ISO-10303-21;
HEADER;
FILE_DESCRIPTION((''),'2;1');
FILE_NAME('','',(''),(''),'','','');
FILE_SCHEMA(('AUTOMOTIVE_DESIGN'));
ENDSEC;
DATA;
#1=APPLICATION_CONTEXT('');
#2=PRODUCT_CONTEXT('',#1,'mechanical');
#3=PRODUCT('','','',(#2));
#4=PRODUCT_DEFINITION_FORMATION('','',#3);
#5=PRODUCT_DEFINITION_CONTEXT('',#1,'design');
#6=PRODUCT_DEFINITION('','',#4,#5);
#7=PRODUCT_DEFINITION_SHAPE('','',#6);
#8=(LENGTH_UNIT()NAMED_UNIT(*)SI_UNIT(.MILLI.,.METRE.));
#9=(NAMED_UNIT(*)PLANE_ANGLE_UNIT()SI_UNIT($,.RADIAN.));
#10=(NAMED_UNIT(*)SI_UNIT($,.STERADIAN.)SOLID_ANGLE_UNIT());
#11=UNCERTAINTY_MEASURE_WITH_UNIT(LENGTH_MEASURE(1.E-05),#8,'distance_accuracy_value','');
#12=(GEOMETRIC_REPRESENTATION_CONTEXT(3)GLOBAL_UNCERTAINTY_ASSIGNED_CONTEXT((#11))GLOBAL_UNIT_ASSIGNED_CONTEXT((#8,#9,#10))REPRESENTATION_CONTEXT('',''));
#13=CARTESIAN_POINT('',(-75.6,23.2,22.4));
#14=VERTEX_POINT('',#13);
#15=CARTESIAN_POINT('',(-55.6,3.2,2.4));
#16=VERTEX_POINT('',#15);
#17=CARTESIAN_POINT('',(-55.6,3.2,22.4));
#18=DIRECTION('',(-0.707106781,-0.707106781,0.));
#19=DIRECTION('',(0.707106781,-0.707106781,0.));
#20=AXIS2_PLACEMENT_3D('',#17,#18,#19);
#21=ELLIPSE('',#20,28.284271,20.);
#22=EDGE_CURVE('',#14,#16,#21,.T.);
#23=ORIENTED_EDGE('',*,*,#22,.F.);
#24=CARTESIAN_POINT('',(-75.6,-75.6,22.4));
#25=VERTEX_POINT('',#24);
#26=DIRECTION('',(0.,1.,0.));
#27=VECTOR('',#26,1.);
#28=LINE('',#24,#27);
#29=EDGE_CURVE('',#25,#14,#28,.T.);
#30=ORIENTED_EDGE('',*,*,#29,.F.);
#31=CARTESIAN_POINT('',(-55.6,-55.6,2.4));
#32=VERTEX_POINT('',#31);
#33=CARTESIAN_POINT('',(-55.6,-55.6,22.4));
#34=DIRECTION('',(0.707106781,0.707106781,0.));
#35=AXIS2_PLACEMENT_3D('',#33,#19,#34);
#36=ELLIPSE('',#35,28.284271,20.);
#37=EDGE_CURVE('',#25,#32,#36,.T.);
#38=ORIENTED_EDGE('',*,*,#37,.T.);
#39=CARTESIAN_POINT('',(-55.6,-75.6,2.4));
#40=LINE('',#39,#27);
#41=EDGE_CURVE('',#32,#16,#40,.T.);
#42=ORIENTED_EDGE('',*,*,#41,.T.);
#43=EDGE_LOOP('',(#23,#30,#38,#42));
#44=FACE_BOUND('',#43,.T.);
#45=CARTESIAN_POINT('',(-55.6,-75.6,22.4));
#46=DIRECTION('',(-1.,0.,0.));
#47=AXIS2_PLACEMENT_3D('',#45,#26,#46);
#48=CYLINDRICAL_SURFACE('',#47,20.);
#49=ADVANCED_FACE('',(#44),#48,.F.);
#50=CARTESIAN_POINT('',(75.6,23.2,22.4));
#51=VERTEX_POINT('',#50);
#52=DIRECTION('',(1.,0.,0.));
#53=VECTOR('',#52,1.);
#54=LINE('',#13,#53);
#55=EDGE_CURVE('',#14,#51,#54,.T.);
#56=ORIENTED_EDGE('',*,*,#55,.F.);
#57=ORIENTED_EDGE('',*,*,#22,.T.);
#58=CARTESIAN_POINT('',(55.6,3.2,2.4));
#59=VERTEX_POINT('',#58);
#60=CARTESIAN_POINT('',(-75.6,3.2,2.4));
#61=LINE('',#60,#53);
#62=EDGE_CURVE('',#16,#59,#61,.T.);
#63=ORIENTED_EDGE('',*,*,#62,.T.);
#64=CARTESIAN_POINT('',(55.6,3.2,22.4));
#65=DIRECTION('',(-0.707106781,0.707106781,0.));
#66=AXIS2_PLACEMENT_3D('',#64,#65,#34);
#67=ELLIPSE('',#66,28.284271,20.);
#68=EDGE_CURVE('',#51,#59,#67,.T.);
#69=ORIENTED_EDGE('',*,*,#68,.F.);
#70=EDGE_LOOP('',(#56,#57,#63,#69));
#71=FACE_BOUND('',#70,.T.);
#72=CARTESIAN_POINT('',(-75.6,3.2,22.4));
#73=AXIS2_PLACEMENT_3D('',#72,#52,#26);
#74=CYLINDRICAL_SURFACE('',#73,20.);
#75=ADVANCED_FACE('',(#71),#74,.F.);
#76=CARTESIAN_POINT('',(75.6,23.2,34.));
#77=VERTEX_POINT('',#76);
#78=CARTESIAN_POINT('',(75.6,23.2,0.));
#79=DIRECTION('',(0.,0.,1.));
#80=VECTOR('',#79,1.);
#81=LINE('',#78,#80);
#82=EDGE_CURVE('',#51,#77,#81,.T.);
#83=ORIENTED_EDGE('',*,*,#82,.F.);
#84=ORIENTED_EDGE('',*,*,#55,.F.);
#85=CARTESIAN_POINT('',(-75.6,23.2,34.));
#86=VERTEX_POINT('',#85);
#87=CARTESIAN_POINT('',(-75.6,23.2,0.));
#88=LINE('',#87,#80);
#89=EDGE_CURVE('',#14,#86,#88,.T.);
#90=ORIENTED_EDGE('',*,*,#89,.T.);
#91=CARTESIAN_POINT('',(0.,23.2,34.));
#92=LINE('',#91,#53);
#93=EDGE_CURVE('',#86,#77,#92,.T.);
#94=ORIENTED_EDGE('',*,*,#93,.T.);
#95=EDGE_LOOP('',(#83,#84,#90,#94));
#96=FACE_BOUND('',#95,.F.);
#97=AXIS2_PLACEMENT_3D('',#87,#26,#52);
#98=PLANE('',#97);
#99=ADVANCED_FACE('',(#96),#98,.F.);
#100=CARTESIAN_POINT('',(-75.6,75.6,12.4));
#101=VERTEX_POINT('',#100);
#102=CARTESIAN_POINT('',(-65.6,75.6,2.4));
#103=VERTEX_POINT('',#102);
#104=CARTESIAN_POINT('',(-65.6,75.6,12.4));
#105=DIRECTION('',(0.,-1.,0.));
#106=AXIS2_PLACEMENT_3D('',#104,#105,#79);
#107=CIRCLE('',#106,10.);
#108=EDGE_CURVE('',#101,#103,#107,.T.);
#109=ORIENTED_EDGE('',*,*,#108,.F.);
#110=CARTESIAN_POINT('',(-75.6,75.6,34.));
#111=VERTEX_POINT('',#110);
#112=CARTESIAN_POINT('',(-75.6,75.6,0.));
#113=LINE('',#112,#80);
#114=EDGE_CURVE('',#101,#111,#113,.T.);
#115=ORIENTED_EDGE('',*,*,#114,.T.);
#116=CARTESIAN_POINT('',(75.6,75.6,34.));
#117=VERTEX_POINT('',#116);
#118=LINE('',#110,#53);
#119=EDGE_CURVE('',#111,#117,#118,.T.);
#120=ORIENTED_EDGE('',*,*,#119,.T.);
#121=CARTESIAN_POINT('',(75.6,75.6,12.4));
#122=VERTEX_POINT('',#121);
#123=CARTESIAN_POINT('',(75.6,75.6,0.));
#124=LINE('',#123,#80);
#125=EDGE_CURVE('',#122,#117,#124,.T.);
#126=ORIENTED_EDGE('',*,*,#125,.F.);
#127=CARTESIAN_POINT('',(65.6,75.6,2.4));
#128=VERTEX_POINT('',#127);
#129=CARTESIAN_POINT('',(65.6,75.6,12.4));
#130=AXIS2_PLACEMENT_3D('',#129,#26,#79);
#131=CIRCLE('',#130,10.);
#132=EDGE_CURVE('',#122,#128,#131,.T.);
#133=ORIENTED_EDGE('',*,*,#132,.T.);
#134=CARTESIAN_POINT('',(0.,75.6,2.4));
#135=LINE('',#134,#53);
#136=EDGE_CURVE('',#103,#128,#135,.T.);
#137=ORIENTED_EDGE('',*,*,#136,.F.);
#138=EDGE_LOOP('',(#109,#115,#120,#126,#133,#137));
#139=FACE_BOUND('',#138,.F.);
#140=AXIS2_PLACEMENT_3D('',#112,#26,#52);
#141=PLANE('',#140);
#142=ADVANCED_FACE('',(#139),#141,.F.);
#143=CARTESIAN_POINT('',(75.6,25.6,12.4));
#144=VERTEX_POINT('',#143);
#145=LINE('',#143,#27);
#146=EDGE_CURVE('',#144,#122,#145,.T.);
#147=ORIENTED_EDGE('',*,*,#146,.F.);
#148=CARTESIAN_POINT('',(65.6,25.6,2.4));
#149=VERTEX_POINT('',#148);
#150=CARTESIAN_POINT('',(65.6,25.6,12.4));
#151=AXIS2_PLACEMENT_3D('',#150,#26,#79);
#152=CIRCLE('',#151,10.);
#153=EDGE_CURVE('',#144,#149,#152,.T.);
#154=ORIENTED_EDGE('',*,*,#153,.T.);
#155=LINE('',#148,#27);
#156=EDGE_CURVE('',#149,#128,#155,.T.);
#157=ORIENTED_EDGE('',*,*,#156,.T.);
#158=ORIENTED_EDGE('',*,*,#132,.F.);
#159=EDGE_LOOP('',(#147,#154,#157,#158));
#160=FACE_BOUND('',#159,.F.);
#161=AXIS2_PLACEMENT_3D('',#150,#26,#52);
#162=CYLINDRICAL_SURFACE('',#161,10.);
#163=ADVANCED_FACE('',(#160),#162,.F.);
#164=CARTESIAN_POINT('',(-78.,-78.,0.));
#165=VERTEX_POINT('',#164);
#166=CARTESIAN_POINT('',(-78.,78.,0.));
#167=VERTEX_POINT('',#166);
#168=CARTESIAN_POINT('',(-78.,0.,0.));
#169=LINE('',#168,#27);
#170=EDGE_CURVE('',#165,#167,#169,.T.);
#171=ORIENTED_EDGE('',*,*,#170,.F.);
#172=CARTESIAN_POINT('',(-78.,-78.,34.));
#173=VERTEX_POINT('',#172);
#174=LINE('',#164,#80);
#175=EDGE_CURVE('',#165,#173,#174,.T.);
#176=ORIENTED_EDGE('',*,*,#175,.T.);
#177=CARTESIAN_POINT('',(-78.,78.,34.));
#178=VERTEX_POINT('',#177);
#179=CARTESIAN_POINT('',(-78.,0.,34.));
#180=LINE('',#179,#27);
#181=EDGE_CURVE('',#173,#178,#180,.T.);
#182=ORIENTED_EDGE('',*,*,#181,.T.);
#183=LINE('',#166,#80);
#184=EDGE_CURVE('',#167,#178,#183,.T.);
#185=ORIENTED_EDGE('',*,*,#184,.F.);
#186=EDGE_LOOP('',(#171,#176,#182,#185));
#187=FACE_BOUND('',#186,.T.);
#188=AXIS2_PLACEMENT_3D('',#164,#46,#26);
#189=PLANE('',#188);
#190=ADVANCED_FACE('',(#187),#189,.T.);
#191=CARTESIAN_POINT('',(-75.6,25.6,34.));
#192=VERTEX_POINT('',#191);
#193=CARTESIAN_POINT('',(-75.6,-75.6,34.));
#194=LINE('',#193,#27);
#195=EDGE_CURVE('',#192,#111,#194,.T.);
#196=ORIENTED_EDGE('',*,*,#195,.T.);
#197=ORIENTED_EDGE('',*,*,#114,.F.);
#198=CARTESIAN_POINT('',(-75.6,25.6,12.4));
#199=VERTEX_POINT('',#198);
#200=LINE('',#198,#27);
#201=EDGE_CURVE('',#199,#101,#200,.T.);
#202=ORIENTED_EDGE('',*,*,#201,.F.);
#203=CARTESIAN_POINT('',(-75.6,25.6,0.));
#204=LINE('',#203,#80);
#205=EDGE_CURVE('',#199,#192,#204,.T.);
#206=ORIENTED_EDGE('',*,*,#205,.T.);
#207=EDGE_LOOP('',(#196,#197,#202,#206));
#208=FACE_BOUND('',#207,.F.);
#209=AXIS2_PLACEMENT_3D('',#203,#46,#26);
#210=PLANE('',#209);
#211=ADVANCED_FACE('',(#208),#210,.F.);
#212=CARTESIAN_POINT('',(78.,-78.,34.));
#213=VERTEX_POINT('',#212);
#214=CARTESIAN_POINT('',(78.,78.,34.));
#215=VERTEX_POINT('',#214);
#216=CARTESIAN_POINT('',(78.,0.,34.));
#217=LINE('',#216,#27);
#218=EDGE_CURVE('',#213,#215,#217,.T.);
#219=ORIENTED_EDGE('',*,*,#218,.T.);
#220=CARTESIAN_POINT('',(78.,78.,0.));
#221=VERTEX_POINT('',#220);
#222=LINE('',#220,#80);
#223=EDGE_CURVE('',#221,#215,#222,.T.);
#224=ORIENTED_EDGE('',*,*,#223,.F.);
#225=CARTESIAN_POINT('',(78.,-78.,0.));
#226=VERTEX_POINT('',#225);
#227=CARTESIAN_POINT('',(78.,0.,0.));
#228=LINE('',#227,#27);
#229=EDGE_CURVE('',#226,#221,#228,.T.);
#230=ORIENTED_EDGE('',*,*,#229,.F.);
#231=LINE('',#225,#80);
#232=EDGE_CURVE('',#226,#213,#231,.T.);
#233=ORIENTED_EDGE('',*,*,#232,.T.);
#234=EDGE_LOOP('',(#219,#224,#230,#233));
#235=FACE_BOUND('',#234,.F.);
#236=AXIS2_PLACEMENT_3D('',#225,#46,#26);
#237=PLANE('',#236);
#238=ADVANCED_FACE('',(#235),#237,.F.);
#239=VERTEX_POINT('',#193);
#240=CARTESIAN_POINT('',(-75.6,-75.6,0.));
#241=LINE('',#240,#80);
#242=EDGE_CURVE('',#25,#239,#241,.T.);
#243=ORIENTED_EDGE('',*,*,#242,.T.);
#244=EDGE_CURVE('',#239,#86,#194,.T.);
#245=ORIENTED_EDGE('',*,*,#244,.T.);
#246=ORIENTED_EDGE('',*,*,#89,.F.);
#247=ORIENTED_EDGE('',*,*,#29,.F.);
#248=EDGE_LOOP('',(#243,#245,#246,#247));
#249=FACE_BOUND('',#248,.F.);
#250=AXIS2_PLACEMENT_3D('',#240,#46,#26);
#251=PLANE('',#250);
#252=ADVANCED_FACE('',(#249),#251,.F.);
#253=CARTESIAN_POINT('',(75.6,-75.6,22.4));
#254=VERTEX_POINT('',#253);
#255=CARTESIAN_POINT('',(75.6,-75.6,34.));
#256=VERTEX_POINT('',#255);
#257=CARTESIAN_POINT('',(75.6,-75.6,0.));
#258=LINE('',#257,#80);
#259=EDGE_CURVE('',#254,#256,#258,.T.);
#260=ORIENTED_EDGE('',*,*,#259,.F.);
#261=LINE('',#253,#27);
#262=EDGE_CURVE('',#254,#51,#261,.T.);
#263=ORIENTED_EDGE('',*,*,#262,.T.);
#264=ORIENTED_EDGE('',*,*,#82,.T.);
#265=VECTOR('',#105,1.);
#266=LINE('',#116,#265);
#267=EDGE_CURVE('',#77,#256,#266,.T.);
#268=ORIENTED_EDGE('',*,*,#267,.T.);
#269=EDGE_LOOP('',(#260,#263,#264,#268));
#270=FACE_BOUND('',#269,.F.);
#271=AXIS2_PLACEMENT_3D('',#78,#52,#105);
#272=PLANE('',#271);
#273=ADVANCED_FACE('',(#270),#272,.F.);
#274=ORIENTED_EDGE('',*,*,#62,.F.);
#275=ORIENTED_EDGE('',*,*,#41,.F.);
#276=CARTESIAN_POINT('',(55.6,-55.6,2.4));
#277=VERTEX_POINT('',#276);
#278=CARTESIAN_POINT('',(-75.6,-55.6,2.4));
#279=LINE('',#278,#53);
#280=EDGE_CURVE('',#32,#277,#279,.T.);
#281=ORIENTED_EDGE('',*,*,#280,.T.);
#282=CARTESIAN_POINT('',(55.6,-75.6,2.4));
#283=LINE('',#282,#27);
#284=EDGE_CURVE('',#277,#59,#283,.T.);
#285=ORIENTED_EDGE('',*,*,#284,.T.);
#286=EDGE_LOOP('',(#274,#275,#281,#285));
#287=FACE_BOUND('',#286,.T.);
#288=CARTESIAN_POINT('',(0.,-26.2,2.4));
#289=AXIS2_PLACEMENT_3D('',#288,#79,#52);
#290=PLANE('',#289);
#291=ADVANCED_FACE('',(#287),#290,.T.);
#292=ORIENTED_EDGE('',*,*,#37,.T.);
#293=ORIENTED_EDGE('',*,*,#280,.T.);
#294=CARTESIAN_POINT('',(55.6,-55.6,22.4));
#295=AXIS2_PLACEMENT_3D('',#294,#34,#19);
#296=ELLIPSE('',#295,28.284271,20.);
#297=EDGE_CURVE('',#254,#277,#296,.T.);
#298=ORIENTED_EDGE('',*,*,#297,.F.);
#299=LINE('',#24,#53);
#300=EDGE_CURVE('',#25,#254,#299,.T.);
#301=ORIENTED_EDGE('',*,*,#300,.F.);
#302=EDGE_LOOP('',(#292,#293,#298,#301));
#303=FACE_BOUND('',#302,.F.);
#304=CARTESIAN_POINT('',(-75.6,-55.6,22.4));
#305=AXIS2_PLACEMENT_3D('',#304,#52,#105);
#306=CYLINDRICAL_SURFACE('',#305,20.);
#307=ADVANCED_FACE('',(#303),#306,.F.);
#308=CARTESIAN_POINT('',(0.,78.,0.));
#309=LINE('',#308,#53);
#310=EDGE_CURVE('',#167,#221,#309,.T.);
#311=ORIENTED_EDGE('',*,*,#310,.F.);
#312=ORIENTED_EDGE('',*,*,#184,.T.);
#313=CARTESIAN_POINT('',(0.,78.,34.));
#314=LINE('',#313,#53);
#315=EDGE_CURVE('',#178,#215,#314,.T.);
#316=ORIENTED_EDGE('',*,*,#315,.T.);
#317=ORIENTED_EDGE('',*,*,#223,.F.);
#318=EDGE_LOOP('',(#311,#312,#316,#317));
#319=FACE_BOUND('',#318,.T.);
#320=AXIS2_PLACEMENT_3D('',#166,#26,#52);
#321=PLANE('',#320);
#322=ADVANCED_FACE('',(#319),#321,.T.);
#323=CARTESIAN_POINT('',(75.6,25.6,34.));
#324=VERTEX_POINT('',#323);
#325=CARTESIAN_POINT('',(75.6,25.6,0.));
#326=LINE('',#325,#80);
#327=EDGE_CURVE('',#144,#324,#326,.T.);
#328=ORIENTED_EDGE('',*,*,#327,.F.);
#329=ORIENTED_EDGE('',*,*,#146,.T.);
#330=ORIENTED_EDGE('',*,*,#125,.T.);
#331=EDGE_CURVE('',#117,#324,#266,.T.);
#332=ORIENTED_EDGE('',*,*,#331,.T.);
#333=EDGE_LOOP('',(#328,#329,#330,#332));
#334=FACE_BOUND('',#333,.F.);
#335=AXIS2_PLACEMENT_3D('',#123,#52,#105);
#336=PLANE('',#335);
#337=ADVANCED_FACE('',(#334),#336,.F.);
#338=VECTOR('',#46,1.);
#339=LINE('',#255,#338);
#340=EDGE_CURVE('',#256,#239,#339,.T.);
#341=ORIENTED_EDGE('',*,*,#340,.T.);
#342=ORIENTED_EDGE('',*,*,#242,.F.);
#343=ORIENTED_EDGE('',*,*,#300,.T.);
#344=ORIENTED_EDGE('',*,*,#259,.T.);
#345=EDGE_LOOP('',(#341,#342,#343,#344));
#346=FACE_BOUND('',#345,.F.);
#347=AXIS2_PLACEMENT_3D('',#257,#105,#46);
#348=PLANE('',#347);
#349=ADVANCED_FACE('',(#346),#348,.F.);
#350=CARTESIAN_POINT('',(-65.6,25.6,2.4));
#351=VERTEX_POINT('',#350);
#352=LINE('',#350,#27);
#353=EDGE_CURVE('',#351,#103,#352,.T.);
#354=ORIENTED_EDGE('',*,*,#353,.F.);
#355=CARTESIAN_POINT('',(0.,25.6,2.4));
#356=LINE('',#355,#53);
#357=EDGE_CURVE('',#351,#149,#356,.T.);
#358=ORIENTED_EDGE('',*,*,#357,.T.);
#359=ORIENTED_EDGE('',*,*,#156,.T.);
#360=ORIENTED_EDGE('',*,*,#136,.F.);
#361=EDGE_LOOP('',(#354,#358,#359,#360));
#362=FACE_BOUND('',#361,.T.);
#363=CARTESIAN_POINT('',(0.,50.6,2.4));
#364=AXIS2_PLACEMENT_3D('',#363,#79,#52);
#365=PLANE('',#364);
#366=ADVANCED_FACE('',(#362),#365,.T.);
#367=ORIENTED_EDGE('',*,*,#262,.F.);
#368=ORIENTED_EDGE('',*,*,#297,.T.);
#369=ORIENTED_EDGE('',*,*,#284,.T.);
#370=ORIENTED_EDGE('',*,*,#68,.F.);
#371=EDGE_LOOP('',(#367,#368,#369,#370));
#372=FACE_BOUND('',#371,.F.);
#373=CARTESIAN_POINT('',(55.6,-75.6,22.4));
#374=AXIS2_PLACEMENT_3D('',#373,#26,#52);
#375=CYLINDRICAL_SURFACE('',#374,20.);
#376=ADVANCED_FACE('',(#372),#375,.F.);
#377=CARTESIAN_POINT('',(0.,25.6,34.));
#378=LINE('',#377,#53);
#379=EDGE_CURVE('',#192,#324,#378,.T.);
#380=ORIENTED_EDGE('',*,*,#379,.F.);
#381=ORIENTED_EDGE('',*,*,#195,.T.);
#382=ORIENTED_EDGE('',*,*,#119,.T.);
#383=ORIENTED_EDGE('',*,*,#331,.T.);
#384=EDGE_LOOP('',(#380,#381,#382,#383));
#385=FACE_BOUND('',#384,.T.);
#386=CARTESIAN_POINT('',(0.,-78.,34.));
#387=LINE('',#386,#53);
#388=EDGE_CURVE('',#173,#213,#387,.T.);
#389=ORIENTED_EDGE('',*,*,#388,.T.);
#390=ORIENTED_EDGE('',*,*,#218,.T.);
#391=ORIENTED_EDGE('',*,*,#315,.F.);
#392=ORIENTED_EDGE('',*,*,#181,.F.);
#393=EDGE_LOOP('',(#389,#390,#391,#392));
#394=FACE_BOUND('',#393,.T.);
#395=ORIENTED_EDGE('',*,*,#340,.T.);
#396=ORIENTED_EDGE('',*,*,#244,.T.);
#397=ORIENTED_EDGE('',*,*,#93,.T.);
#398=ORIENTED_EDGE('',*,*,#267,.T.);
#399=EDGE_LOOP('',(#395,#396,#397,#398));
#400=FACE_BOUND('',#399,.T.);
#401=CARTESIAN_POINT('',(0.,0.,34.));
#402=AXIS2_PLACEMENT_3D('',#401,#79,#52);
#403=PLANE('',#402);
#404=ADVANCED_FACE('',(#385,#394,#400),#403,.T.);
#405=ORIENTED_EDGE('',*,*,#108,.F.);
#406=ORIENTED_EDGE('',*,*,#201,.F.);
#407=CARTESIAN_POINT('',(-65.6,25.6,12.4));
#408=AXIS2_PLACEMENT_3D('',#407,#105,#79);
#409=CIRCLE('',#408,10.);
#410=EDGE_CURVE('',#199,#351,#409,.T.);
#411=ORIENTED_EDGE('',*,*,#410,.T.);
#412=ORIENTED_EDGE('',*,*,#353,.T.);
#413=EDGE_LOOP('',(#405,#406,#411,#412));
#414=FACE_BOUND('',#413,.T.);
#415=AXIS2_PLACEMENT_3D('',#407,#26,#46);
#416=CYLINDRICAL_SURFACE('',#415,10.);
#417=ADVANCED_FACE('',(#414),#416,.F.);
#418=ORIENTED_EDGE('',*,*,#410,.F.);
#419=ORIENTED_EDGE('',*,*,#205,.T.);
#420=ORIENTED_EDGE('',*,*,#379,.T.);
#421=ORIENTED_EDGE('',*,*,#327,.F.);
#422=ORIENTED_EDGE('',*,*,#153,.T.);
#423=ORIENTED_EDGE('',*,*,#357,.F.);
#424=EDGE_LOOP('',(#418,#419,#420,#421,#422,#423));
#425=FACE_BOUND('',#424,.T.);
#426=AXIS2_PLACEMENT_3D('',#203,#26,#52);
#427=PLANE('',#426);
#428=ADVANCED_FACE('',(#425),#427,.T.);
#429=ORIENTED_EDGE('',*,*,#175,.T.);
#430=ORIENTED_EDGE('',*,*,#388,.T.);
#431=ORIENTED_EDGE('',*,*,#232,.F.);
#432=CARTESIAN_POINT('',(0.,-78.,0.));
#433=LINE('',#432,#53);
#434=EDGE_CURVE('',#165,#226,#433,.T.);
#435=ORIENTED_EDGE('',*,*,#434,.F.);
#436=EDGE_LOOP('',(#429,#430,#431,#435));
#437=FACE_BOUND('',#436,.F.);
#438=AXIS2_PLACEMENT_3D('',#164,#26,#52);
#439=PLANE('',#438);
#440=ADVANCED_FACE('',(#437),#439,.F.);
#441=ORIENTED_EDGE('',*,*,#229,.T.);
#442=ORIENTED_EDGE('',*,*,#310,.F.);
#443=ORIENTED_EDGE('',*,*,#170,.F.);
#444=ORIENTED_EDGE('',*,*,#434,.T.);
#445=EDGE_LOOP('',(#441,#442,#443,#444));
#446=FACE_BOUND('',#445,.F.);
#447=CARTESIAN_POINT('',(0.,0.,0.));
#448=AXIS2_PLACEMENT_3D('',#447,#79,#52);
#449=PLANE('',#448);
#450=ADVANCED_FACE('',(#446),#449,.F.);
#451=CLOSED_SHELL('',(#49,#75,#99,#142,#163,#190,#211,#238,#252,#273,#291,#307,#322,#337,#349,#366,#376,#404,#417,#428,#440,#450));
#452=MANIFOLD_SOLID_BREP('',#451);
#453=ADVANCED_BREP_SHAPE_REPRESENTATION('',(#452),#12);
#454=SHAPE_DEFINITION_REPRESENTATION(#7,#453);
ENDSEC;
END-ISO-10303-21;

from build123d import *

# Parameters (mm, degrees)
F0_W     = 151.2
F0_H     = 50
F1_DEPTH = 2.4
F0_H_2   = 98.8
F0_W_2   = 156
F0_H_3   = 156
F0_H_4   = 2.4
F2_DEPTH = 34
F3_R     = 20
F4_R     = 10


with BuildPart() as f1:
    # F0 (on Top) → F1 (new body)
    with BuildSketch(Plane.XY):
        with Locations((0, 50.6)):
            Rectangle(F0_W, F0_H)
    extrude(amount=F1_DEPTH)



with BuildPart() as f1b:
    # F0 (on Top) → F1, piece 2 (new body)
    with BuildSketch(Plane.XY):
        with Locations((0, -26.2)):
            Rectangle(F0_W, F0_H_2)
    extrude(amount=F1_DEPTH)


with BuildPart() as f1_1:
    add(f1.part)

    add(f1b.part)  # F2 merges F1b
    # F0 (on Top) → F2 (join)
    with BuildSketch(Plane.XY):
        Rectangle(F0_W_2, F0_H_3)
        Polygon((-75.6, 25.6), (-75.6, 75.6), (75.6, 75.6), (75.6, 25.6), (75.6, 23.2), (75.6, -75.6), (-75.6, -75.6), (-75.6, 23.2), align=None, mode=Mode.SUBTRACT)
        with Locations((0, 24.4)):
            Rectangle(F0_W, F0_H_4)
    extrude(amount=F2_DEPTH)

    # F3
    f3_edges = [f1_1.edges().sort_by_distance(p)[0] for p in [
        (0, -75.6, 2.4),
        (75.6, -26.2, 2.4),
        (0, 23.2, 2.4),
        (-75.6, -26.2, 2.4),
    ]]
    fillet(f3_edges, radius=F3_R)

    # F4
    f4_edges = [f1_1.edges().sort_by_distance(p)[0] for p in [
        (75.6, 50.6, 2.4),
        (-75.6, 50.6, 2.4),
    ]]
    fillet(f4_edges, radius=F4_R)


solid = f1_1.part
